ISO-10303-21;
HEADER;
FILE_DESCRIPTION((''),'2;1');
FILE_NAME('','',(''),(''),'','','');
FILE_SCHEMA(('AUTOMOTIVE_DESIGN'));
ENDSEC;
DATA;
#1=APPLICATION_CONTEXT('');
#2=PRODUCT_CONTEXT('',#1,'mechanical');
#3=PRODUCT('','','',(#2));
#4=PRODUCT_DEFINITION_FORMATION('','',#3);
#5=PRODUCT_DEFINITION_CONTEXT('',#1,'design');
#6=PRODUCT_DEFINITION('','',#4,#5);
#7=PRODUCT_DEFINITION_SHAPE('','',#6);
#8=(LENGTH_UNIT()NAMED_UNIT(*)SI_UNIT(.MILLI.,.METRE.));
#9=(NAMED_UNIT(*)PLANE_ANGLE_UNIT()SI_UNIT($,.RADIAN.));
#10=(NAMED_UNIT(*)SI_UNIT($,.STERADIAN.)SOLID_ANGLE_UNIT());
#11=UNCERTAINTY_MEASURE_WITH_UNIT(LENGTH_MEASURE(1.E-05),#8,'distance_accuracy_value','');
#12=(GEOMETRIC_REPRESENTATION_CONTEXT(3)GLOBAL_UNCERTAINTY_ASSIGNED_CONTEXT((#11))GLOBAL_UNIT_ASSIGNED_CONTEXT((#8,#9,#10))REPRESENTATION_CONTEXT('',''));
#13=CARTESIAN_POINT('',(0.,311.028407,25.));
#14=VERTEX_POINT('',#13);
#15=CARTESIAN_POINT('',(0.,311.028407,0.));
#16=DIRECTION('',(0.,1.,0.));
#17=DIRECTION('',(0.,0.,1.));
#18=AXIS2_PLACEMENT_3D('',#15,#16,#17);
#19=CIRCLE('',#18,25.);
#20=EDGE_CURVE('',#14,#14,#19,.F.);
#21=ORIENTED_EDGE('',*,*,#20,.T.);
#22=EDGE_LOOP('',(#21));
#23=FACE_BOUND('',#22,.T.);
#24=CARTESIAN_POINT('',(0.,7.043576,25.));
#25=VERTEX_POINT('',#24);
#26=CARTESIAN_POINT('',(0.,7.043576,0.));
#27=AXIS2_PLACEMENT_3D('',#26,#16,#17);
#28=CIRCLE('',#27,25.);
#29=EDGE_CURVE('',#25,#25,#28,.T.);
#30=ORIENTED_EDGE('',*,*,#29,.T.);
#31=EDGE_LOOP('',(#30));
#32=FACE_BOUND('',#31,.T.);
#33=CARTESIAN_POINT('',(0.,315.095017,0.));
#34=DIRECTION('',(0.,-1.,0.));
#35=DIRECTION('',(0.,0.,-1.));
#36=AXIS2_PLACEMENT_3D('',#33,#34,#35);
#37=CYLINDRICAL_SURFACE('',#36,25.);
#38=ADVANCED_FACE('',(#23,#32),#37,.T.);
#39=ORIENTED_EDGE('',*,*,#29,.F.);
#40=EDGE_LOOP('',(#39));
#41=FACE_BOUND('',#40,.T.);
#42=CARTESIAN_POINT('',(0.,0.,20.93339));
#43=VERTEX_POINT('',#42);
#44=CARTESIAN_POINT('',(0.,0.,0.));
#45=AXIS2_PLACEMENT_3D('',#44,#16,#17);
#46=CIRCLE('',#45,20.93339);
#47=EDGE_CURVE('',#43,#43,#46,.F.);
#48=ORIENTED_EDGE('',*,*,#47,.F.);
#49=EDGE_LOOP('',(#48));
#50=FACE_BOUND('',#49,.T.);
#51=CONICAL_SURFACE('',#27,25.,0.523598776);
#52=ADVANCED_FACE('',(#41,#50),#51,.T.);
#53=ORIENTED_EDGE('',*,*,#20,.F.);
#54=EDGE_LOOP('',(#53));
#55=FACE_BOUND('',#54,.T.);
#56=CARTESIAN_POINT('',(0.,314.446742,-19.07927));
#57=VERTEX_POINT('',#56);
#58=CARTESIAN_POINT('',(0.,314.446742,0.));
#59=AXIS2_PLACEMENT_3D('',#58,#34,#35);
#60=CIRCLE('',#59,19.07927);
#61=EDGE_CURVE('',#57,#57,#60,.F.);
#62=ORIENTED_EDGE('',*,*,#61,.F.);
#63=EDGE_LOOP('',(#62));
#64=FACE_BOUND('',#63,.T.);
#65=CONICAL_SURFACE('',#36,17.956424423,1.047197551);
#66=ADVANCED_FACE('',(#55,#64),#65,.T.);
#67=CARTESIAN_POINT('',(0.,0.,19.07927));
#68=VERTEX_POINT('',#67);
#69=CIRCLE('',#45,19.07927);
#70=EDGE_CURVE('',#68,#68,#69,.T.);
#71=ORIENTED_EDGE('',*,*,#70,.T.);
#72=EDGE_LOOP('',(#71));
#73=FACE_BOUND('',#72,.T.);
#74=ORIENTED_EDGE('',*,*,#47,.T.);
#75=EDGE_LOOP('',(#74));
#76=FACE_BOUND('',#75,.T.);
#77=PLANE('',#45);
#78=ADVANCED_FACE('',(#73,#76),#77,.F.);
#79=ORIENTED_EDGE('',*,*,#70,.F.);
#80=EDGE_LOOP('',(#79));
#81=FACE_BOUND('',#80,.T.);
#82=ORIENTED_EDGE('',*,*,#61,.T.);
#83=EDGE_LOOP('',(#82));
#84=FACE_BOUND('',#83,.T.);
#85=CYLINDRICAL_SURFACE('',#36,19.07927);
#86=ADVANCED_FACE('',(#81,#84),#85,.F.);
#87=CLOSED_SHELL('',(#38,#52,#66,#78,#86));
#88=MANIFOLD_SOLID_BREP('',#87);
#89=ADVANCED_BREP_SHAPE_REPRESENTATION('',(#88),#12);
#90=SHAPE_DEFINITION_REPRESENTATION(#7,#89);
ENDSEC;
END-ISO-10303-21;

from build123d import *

# Parameters (mm, degrees)
SKETCH1_R           = 25
BOSS_EXTRUDE1_DEPTH = 315.095017
SKETCH2_R           = 19.079270484
CUT_EXTRUDE1_DEPTH  = 318.07234149
CHAMFER1_SIZE       = 4.06661
CHAMFER1_SIZE_2     = 7.043576


with BuildPart() as part:
    # Sketch1 → Boss-Extrude1 (new body)
    with BuildSketch(Plane(origin=(0, 0, 0), x_dir=(1, 0, 0), z_dir=(0, 1, 0))):
        with Locations(Location((0, 0, 0), (0, 0, 270))):
            Circle(SKETCH1_R)
    extrude(amount=BOSS_EXTRUDE1_DEPTH)

    # Sketch2 → Cut-Extrude1 (cut, through all)
    with BuildSketch(Plane(origin=(0, 0, 0), x_dir=(1, 0, 0), z_dir=(0, 1, 0))):
        with Locations(Location((0, 0, 0), (0, 0, 270))):
            Circle(SKETCH2_R)
    extrude(amount=CUT_EXTRUDE1_DEPTH, mode=Mode.SUBTRACT)

    # Chamfer1
    # the kernel refuses this chamfer: 7.043576, 4.06661 mm, written as the material it takes off along each edge
    with BuildSketch(Plane(origin=(0, 315.095017, 0), x_dir=(0, 0, 1), z_dir=(-1, 0, 0))) as chamfer1_piece_1:
        Polygon((25, -CHAMFER1_SIZE), (25 - CHAMFER1_SIZE_2, 0), (25, 0), align=None)
    revolve(axis=Axis((0, 315.095017, 0), (0, 1, 0)), mode=Mode.SUBTRACT)
    with BuildSketch(Plane(origin=(0, 0, 0), x_dir=(0, 0, 1), z_dir=(-1, 0, 0))) as chamfer1_piece_2:
        Polygon((25, CHAMFER1_SIZE_2), (25 - CHAMFER1_SIZE, 0), (25, 0), align=None)
    revolve(axis=Axis((0, 0, 0), (0, 1, 0)), mode=Mode.SUBTRACT)


solid = part.part
